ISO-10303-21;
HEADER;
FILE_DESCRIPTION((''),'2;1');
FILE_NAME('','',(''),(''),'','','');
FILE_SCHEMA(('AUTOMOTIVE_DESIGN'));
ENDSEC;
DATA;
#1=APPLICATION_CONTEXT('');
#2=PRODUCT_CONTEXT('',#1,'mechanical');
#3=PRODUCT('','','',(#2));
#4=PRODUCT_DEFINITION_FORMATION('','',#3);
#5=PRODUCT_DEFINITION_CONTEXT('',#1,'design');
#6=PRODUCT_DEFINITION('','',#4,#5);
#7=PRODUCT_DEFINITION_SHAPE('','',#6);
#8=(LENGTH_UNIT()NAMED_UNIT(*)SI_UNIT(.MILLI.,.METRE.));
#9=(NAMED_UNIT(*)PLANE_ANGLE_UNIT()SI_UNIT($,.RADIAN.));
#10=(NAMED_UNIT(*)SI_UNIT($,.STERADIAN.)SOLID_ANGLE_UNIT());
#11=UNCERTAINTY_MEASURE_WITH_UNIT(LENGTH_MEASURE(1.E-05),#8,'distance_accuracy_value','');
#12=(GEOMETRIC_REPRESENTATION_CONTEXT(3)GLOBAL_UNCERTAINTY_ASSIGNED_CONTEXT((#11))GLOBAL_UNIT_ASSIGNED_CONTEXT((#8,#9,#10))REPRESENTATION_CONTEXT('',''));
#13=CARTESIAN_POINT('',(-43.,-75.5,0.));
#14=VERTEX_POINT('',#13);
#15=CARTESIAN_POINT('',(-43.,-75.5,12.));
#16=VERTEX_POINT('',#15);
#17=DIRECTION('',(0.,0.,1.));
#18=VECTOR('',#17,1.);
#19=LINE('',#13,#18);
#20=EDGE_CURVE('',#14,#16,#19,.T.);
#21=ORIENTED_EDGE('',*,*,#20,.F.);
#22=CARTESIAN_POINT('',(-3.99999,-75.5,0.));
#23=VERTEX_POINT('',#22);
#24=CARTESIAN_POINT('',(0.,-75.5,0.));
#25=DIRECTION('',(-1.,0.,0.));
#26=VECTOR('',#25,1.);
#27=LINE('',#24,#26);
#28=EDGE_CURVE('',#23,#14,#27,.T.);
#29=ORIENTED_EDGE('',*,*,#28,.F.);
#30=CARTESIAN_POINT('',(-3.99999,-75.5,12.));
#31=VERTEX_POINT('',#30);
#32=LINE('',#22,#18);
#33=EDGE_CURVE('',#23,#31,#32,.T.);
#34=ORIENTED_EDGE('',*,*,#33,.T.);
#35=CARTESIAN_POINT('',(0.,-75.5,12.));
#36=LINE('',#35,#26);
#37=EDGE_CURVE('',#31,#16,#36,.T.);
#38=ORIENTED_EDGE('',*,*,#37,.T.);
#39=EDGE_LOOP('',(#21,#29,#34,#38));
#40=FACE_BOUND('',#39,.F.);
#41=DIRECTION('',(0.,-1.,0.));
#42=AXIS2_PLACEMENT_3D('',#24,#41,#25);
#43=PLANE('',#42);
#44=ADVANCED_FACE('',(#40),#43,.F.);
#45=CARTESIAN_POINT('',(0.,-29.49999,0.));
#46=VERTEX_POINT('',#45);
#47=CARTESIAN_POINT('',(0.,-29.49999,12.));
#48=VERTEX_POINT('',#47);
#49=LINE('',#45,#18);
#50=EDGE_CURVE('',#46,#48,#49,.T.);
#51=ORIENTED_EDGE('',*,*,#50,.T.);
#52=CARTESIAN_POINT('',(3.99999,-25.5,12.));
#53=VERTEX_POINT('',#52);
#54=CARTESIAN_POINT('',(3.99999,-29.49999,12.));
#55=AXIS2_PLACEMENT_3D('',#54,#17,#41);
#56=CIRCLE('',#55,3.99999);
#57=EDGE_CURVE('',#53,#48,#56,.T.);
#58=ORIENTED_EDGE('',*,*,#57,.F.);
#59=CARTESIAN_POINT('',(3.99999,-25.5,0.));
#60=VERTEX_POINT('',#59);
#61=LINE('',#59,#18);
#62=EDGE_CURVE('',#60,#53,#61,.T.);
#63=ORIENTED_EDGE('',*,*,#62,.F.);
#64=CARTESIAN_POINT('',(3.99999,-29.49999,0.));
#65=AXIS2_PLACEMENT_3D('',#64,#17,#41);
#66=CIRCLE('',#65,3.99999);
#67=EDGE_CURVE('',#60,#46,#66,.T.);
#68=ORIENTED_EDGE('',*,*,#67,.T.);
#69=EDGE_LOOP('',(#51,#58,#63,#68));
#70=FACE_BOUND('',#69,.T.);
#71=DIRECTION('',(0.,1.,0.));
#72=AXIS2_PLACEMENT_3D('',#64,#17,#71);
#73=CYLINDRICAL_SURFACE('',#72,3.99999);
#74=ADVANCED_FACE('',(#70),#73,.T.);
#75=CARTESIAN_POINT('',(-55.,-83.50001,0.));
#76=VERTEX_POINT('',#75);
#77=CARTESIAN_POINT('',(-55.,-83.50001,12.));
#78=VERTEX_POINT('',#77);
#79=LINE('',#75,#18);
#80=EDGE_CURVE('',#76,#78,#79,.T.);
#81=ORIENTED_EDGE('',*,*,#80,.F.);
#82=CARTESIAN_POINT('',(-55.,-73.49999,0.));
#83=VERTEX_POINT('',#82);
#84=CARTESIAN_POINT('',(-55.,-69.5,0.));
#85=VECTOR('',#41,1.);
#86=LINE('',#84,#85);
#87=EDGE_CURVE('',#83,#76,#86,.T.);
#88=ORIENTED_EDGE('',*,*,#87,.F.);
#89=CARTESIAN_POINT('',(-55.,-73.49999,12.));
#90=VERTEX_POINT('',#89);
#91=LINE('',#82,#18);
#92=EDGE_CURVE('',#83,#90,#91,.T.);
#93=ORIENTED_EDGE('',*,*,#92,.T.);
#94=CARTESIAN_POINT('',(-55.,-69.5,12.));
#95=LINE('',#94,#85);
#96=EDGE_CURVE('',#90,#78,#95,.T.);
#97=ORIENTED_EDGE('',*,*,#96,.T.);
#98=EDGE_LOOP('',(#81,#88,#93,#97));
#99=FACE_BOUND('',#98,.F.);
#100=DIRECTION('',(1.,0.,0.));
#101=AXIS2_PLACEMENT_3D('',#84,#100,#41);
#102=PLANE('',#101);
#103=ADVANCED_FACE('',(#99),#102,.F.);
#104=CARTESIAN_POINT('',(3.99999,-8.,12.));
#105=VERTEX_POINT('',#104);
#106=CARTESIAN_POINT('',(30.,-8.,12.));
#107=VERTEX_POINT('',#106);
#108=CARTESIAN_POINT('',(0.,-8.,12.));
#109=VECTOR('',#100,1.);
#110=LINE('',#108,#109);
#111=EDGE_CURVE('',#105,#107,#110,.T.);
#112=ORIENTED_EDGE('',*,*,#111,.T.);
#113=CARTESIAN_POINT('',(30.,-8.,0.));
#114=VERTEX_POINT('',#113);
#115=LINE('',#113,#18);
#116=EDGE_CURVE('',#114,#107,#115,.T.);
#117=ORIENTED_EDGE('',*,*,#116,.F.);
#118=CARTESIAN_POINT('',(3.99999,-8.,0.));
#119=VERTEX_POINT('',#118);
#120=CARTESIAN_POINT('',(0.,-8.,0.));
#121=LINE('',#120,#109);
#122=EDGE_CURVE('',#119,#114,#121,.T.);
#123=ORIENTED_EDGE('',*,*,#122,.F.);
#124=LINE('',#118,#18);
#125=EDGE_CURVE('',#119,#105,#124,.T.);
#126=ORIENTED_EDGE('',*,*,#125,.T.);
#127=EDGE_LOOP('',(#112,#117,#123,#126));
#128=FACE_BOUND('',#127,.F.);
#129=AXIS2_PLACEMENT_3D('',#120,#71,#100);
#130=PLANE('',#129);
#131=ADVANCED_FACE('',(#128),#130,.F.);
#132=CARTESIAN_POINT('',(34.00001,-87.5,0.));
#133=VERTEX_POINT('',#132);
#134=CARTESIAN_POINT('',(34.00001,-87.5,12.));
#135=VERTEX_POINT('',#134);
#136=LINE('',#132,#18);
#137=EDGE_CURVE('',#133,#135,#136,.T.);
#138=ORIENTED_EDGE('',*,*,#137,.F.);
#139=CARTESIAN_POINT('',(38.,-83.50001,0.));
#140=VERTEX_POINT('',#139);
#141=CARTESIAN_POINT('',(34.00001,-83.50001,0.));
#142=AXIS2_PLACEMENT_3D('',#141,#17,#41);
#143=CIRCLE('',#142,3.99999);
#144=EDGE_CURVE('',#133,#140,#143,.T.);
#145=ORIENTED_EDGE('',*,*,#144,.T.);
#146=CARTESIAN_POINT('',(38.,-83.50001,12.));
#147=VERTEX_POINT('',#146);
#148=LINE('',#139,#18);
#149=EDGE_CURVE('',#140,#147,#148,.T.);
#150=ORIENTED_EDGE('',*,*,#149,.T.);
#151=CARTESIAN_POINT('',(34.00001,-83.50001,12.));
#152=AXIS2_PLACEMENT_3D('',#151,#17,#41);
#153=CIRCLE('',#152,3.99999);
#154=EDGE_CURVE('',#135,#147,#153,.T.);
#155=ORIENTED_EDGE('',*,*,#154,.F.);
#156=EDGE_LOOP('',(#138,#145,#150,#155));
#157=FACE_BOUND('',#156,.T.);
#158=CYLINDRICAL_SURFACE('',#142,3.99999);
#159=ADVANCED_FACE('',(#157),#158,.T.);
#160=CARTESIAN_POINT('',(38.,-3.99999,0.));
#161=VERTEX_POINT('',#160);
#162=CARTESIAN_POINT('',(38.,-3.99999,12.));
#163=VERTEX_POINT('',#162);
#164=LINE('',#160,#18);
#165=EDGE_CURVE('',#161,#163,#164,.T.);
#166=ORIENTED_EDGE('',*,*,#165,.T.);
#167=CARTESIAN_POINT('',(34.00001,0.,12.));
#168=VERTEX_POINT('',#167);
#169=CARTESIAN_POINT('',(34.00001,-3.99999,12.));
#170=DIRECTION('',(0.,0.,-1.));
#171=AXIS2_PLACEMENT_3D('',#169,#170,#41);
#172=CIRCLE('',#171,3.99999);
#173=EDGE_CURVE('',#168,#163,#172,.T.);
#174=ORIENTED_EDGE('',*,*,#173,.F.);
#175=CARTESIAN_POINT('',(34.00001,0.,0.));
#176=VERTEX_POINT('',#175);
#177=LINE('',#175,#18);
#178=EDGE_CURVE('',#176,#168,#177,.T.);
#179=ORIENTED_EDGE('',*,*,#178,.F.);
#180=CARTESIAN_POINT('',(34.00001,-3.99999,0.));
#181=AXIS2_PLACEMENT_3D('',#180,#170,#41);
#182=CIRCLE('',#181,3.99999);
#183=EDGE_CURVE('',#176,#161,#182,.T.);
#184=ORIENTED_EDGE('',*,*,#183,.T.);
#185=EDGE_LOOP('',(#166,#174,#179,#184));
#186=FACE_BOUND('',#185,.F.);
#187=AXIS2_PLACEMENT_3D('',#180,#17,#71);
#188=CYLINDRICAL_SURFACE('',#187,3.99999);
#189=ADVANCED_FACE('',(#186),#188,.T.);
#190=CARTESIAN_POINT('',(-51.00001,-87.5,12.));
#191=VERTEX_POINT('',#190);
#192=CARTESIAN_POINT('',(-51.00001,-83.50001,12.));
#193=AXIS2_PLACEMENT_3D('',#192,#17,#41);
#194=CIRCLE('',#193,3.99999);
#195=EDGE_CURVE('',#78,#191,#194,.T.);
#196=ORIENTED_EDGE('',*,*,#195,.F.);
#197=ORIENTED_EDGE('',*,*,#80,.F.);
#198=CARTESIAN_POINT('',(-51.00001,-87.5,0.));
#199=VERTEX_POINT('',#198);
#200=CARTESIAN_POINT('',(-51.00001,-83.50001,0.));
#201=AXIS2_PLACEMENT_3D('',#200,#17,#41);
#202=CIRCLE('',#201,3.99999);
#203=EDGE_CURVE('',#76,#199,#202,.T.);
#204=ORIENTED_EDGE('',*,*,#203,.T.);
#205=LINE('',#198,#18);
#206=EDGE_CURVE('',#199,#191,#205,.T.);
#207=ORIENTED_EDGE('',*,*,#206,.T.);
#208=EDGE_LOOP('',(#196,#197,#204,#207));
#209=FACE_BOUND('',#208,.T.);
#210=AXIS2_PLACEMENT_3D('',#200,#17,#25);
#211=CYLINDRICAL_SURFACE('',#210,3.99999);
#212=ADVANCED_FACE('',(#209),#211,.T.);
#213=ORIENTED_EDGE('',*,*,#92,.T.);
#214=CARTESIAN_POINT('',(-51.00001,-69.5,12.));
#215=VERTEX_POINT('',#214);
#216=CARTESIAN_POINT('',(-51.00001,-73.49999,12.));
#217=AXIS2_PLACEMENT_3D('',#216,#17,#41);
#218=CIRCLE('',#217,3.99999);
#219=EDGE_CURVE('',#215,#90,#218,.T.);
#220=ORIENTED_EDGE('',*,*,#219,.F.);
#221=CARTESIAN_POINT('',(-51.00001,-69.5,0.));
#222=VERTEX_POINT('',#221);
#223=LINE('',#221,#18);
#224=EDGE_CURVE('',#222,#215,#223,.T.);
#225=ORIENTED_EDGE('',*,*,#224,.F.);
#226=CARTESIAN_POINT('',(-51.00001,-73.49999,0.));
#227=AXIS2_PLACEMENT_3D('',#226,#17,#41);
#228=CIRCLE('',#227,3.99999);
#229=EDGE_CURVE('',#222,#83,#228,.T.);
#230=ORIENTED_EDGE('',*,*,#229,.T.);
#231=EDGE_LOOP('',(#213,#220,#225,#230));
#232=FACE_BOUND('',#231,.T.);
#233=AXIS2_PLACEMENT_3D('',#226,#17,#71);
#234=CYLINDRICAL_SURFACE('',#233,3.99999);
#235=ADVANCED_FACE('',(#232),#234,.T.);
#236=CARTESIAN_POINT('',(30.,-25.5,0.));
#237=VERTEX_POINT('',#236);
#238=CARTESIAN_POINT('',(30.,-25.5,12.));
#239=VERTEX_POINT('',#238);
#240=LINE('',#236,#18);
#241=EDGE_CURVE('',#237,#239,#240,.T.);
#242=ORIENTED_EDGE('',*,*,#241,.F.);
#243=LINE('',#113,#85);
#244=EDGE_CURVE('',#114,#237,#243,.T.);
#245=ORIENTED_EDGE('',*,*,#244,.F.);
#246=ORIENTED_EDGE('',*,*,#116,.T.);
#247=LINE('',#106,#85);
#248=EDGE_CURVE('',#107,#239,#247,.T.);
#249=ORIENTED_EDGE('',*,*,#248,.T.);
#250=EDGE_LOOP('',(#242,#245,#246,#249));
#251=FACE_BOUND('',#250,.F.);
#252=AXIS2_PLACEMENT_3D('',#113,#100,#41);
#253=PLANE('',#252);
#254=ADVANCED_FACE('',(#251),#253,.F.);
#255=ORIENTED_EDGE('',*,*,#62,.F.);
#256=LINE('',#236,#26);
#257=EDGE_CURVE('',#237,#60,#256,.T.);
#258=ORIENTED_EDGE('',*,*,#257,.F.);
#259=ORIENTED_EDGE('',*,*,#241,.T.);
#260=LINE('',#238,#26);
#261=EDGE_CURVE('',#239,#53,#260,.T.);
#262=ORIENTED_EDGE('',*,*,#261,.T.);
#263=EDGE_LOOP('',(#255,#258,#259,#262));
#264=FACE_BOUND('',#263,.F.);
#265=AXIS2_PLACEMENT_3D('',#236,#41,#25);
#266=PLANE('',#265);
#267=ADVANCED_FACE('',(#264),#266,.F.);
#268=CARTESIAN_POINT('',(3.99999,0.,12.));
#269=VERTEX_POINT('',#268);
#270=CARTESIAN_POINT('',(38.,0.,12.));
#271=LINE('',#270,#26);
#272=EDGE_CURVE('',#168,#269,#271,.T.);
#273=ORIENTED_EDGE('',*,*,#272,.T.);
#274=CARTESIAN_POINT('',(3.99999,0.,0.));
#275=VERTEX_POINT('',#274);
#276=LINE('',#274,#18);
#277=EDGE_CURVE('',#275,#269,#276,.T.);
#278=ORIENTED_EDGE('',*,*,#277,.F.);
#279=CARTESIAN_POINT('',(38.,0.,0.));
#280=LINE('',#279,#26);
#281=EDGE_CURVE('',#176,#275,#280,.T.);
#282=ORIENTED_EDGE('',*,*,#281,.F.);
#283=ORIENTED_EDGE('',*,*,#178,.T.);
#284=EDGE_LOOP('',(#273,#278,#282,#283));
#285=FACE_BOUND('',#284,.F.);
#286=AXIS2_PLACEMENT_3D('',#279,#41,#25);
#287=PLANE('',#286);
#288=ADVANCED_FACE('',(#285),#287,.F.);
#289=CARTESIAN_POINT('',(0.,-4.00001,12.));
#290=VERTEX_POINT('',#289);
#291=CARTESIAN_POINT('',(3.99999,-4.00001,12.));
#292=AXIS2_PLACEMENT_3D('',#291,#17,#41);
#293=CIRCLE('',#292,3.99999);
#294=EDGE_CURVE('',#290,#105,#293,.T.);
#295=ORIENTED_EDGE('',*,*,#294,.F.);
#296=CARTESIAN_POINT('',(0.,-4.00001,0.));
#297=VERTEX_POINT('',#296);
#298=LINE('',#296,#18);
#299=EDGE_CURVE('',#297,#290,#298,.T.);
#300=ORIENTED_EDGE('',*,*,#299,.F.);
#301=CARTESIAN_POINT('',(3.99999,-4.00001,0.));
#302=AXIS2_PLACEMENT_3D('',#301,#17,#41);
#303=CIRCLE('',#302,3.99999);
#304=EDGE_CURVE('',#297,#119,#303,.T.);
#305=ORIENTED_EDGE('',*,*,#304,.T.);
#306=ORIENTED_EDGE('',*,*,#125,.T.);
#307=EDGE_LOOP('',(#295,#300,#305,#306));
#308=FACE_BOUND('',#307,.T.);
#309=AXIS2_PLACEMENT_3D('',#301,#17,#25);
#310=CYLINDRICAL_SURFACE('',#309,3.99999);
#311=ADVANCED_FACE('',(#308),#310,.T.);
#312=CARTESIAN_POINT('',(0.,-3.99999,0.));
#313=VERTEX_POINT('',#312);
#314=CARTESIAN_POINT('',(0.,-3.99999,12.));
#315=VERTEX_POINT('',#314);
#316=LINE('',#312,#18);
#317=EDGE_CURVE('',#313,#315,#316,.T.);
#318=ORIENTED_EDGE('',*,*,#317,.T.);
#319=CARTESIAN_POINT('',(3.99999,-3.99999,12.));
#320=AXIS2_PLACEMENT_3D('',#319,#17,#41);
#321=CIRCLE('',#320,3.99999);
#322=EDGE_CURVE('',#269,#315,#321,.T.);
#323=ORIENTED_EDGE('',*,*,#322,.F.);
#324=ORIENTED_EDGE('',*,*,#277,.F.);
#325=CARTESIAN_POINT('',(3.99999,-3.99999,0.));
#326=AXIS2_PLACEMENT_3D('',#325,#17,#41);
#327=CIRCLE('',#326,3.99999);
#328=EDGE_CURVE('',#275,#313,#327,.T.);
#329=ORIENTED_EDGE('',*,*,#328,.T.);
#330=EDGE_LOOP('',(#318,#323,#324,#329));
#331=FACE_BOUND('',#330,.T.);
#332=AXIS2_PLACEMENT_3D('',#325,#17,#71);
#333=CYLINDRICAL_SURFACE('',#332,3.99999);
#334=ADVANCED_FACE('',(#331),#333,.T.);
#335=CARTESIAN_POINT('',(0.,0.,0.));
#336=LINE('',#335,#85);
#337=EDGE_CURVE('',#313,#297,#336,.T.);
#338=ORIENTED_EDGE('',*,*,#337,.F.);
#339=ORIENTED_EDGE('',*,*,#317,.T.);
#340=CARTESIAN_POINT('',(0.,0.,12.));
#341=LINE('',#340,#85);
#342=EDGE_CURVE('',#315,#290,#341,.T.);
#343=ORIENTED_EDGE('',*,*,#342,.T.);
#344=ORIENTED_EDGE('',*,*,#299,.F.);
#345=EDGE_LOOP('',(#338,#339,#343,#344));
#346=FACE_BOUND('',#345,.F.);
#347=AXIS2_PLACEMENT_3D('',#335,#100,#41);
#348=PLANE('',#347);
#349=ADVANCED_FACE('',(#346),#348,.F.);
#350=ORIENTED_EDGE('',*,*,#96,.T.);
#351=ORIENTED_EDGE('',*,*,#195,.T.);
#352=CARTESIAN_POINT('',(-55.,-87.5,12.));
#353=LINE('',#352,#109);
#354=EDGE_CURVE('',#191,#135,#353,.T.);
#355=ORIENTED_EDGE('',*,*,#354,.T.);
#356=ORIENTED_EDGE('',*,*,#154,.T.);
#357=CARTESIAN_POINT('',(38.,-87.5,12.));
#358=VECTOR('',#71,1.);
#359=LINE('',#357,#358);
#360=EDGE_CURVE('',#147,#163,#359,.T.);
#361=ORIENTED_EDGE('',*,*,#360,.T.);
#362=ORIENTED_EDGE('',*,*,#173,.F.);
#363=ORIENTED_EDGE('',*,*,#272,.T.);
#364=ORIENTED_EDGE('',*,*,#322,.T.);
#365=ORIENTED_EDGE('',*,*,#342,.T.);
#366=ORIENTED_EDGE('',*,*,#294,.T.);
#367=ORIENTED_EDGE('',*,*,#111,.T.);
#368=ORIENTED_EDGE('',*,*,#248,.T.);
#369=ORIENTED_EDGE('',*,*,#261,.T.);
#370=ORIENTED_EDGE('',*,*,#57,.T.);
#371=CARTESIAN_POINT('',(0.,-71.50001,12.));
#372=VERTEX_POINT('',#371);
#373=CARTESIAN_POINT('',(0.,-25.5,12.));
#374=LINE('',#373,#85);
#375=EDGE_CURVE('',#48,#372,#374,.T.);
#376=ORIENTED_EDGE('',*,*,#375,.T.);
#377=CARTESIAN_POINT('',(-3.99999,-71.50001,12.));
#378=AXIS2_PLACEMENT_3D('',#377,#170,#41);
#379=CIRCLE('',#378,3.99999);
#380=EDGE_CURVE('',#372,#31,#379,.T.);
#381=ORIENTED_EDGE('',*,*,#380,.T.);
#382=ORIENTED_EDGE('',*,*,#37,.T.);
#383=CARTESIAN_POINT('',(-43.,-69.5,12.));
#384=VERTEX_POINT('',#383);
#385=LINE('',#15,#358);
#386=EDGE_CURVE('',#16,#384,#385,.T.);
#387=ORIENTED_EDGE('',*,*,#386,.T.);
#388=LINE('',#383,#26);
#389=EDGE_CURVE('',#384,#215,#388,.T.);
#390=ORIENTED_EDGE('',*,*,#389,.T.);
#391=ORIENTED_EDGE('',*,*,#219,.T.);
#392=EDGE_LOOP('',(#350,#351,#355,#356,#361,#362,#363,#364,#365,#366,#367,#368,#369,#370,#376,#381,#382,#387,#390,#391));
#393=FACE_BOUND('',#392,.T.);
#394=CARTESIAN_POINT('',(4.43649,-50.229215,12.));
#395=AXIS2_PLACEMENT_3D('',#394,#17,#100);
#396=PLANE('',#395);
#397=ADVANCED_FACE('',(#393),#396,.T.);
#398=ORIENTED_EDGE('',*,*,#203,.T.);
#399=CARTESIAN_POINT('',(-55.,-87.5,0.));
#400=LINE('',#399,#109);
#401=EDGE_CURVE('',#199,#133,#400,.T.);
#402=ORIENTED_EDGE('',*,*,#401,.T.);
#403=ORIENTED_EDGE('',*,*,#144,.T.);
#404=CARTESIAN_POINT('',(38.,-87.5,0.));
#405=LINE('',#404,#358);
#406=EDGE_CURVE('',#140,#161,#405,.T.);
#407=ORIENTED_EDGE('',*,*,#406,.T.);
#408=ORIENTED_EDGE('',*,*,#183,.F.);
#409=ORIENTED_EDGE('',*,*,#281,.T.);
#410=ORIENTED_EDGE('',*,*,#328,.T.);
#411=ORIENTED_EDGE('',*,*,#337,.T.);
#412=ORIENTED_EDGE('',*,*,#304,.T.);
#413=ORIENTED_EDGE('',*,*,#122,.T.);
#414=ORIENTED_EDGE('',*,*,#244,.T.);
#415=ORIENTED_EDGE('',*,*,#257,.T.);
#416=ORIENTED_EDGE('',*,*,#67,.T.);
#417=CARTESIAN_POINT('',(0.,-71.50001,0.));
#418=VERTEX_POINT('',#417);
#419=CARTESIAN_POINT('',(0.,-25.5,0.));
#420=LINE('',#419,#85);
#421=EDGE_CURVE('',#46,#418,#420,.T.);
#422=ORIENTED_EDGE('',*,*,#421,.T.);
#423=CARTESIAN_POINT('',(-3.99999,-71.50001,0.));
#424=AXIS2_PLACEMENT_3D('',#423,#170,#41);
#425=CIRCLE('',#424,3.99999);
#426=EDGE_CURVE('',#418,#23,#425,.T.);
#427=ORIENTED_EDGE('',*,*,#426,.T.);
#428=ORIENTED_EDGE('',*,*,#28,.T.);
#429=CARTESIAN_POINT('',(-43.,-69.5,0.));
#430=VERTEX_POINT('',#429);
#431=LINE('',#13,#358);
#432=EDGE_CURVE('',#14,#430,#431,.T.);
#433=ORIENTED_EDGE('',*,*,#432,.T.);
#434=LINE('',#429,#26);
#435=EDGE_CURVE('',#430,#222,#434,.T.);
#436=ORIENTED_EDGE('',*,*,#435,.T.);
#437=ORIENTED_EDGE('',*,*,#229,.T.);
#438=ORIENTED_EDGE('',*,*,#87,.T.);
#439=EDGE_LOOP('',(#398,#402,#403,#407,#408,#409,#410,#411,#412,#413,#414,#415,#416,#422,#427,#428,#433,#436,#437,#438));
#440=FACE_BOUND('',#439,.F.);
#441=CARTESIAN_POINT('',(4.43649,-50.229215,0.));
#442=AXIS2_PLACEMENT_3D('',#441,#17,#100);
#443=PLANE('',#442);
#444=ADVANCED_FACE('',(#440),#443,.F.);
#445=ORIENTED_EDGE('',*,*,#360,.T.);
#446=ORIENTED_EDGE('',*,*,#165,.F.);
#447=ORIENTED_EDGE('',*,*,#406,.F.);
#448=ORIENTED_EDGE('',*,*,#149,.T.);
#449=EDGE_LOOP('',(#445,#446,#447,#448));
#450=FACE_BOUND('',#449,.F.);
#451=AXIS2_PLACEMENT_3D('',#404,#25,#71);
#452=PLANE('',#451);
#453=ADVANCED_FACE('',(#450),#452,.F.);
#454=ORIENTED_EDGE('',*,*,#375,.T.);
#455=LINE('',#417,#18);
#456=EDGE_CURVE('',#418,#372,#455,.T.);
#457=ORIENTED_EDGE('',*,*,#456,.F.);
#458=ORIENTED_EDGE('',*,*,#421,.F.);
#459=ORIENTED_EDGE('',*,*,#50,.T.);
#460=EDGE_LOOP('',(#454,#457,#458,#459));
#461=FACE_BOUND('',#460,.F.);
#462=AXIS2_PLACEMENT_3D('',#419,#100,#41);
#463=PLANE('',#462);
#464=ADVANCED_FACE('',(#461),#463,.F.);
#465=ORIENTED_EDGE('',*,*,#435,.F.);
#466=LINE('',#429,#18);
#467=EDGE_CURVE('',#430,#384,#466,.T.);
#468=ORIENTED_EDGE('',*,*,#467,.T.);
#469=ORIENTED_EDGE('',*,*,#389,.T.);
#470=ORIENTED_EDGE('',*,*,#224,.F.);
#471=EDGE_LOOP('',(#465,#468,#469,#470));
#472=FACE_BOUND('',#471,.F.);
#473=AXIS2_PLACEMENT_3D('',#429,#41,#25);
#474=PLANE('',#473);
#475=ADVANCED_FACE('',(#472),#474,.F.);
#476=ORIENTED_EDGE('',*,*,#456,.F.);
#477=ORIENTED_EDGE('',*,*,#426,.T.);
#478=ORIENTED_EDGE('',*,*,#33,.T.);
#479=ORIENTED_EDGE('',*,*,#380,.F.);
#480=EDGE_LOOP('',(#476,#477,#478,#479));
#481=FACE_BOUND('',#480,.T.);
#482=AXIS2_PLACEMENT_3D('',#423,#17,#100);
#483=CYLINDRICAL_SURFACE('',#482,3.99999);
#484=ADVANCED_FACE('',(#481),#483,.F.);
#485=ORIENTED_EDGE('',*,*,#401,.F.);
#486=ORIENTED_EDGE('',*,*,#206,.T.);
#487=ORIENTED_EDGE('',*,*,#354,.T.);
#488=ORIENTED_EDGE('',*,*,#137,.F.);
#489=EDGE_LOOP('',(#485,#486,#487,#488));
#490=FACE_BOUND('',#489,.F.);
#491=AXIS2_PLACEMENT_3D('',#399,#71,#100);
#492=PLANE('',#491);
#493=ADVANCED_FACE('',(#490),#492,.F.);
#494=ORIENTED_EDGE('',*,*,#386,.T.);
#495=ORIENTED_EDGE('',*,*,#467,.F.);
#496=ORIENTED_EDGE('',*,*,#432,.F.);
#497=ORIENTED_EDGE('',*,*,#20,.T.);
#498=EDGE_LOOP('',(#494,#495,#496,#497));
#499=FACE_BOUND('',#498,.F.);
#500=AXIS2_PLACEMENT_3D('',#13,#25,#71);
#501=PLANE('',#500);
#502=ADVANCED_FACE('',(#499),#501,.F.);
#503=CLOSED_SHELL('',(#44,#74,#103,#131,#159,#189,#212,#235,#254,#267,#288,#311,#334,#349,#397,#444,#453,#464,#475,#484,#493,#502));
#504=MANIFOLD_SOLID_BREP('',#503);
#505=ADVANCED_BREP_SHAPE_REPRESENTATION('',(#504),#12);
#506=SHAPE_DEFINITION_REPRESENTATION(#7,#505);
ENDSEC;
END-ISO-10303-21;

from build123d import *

# Parameters (mm, degrees)
F1_DEPTH = 12
F2_R     = 3.99999


# Not quite as in the source:
# - a fillet or chamfer is up to 0.001 mm smaller than in the source, because OpenCascade refuses the exact size
# - a feature names something its author has since deleted; it is built from what else it names


with BuildPart() as f1:
    # F0 (on Top) → F1 (new body)
    with BuildSketch(Plane.XY):
        Polygon((38, 0), (0, 0), (0, -8), (30, -8), (30, -25.5), (0, -25.5), (0, -75.5), (-43, -75.5), (-43, -69.5), (-55, -69.5), (-55, -87.5), (38, -87.5), align=None)
    extrude(amount=F1_DEPTH)

    # F2 (radius 4 in the source; OpenCascade refuses exactly that, so slightly less here)
    f2_edges = [f1.edges().sort_by_distance(p)[0] for p in [
        (0, -25.5, 6),
        (0, -8, 6),
        (38, 0, 6),
        (38, -87.5, 6),
        (0, 0, 6),
        (-55, -69.5, 6),
        (0, -75.5, 6),
        (-55, -87.5, 6),
    ]]
    fillet(f2_edges, radius=F2_R)


solid = f1.part
